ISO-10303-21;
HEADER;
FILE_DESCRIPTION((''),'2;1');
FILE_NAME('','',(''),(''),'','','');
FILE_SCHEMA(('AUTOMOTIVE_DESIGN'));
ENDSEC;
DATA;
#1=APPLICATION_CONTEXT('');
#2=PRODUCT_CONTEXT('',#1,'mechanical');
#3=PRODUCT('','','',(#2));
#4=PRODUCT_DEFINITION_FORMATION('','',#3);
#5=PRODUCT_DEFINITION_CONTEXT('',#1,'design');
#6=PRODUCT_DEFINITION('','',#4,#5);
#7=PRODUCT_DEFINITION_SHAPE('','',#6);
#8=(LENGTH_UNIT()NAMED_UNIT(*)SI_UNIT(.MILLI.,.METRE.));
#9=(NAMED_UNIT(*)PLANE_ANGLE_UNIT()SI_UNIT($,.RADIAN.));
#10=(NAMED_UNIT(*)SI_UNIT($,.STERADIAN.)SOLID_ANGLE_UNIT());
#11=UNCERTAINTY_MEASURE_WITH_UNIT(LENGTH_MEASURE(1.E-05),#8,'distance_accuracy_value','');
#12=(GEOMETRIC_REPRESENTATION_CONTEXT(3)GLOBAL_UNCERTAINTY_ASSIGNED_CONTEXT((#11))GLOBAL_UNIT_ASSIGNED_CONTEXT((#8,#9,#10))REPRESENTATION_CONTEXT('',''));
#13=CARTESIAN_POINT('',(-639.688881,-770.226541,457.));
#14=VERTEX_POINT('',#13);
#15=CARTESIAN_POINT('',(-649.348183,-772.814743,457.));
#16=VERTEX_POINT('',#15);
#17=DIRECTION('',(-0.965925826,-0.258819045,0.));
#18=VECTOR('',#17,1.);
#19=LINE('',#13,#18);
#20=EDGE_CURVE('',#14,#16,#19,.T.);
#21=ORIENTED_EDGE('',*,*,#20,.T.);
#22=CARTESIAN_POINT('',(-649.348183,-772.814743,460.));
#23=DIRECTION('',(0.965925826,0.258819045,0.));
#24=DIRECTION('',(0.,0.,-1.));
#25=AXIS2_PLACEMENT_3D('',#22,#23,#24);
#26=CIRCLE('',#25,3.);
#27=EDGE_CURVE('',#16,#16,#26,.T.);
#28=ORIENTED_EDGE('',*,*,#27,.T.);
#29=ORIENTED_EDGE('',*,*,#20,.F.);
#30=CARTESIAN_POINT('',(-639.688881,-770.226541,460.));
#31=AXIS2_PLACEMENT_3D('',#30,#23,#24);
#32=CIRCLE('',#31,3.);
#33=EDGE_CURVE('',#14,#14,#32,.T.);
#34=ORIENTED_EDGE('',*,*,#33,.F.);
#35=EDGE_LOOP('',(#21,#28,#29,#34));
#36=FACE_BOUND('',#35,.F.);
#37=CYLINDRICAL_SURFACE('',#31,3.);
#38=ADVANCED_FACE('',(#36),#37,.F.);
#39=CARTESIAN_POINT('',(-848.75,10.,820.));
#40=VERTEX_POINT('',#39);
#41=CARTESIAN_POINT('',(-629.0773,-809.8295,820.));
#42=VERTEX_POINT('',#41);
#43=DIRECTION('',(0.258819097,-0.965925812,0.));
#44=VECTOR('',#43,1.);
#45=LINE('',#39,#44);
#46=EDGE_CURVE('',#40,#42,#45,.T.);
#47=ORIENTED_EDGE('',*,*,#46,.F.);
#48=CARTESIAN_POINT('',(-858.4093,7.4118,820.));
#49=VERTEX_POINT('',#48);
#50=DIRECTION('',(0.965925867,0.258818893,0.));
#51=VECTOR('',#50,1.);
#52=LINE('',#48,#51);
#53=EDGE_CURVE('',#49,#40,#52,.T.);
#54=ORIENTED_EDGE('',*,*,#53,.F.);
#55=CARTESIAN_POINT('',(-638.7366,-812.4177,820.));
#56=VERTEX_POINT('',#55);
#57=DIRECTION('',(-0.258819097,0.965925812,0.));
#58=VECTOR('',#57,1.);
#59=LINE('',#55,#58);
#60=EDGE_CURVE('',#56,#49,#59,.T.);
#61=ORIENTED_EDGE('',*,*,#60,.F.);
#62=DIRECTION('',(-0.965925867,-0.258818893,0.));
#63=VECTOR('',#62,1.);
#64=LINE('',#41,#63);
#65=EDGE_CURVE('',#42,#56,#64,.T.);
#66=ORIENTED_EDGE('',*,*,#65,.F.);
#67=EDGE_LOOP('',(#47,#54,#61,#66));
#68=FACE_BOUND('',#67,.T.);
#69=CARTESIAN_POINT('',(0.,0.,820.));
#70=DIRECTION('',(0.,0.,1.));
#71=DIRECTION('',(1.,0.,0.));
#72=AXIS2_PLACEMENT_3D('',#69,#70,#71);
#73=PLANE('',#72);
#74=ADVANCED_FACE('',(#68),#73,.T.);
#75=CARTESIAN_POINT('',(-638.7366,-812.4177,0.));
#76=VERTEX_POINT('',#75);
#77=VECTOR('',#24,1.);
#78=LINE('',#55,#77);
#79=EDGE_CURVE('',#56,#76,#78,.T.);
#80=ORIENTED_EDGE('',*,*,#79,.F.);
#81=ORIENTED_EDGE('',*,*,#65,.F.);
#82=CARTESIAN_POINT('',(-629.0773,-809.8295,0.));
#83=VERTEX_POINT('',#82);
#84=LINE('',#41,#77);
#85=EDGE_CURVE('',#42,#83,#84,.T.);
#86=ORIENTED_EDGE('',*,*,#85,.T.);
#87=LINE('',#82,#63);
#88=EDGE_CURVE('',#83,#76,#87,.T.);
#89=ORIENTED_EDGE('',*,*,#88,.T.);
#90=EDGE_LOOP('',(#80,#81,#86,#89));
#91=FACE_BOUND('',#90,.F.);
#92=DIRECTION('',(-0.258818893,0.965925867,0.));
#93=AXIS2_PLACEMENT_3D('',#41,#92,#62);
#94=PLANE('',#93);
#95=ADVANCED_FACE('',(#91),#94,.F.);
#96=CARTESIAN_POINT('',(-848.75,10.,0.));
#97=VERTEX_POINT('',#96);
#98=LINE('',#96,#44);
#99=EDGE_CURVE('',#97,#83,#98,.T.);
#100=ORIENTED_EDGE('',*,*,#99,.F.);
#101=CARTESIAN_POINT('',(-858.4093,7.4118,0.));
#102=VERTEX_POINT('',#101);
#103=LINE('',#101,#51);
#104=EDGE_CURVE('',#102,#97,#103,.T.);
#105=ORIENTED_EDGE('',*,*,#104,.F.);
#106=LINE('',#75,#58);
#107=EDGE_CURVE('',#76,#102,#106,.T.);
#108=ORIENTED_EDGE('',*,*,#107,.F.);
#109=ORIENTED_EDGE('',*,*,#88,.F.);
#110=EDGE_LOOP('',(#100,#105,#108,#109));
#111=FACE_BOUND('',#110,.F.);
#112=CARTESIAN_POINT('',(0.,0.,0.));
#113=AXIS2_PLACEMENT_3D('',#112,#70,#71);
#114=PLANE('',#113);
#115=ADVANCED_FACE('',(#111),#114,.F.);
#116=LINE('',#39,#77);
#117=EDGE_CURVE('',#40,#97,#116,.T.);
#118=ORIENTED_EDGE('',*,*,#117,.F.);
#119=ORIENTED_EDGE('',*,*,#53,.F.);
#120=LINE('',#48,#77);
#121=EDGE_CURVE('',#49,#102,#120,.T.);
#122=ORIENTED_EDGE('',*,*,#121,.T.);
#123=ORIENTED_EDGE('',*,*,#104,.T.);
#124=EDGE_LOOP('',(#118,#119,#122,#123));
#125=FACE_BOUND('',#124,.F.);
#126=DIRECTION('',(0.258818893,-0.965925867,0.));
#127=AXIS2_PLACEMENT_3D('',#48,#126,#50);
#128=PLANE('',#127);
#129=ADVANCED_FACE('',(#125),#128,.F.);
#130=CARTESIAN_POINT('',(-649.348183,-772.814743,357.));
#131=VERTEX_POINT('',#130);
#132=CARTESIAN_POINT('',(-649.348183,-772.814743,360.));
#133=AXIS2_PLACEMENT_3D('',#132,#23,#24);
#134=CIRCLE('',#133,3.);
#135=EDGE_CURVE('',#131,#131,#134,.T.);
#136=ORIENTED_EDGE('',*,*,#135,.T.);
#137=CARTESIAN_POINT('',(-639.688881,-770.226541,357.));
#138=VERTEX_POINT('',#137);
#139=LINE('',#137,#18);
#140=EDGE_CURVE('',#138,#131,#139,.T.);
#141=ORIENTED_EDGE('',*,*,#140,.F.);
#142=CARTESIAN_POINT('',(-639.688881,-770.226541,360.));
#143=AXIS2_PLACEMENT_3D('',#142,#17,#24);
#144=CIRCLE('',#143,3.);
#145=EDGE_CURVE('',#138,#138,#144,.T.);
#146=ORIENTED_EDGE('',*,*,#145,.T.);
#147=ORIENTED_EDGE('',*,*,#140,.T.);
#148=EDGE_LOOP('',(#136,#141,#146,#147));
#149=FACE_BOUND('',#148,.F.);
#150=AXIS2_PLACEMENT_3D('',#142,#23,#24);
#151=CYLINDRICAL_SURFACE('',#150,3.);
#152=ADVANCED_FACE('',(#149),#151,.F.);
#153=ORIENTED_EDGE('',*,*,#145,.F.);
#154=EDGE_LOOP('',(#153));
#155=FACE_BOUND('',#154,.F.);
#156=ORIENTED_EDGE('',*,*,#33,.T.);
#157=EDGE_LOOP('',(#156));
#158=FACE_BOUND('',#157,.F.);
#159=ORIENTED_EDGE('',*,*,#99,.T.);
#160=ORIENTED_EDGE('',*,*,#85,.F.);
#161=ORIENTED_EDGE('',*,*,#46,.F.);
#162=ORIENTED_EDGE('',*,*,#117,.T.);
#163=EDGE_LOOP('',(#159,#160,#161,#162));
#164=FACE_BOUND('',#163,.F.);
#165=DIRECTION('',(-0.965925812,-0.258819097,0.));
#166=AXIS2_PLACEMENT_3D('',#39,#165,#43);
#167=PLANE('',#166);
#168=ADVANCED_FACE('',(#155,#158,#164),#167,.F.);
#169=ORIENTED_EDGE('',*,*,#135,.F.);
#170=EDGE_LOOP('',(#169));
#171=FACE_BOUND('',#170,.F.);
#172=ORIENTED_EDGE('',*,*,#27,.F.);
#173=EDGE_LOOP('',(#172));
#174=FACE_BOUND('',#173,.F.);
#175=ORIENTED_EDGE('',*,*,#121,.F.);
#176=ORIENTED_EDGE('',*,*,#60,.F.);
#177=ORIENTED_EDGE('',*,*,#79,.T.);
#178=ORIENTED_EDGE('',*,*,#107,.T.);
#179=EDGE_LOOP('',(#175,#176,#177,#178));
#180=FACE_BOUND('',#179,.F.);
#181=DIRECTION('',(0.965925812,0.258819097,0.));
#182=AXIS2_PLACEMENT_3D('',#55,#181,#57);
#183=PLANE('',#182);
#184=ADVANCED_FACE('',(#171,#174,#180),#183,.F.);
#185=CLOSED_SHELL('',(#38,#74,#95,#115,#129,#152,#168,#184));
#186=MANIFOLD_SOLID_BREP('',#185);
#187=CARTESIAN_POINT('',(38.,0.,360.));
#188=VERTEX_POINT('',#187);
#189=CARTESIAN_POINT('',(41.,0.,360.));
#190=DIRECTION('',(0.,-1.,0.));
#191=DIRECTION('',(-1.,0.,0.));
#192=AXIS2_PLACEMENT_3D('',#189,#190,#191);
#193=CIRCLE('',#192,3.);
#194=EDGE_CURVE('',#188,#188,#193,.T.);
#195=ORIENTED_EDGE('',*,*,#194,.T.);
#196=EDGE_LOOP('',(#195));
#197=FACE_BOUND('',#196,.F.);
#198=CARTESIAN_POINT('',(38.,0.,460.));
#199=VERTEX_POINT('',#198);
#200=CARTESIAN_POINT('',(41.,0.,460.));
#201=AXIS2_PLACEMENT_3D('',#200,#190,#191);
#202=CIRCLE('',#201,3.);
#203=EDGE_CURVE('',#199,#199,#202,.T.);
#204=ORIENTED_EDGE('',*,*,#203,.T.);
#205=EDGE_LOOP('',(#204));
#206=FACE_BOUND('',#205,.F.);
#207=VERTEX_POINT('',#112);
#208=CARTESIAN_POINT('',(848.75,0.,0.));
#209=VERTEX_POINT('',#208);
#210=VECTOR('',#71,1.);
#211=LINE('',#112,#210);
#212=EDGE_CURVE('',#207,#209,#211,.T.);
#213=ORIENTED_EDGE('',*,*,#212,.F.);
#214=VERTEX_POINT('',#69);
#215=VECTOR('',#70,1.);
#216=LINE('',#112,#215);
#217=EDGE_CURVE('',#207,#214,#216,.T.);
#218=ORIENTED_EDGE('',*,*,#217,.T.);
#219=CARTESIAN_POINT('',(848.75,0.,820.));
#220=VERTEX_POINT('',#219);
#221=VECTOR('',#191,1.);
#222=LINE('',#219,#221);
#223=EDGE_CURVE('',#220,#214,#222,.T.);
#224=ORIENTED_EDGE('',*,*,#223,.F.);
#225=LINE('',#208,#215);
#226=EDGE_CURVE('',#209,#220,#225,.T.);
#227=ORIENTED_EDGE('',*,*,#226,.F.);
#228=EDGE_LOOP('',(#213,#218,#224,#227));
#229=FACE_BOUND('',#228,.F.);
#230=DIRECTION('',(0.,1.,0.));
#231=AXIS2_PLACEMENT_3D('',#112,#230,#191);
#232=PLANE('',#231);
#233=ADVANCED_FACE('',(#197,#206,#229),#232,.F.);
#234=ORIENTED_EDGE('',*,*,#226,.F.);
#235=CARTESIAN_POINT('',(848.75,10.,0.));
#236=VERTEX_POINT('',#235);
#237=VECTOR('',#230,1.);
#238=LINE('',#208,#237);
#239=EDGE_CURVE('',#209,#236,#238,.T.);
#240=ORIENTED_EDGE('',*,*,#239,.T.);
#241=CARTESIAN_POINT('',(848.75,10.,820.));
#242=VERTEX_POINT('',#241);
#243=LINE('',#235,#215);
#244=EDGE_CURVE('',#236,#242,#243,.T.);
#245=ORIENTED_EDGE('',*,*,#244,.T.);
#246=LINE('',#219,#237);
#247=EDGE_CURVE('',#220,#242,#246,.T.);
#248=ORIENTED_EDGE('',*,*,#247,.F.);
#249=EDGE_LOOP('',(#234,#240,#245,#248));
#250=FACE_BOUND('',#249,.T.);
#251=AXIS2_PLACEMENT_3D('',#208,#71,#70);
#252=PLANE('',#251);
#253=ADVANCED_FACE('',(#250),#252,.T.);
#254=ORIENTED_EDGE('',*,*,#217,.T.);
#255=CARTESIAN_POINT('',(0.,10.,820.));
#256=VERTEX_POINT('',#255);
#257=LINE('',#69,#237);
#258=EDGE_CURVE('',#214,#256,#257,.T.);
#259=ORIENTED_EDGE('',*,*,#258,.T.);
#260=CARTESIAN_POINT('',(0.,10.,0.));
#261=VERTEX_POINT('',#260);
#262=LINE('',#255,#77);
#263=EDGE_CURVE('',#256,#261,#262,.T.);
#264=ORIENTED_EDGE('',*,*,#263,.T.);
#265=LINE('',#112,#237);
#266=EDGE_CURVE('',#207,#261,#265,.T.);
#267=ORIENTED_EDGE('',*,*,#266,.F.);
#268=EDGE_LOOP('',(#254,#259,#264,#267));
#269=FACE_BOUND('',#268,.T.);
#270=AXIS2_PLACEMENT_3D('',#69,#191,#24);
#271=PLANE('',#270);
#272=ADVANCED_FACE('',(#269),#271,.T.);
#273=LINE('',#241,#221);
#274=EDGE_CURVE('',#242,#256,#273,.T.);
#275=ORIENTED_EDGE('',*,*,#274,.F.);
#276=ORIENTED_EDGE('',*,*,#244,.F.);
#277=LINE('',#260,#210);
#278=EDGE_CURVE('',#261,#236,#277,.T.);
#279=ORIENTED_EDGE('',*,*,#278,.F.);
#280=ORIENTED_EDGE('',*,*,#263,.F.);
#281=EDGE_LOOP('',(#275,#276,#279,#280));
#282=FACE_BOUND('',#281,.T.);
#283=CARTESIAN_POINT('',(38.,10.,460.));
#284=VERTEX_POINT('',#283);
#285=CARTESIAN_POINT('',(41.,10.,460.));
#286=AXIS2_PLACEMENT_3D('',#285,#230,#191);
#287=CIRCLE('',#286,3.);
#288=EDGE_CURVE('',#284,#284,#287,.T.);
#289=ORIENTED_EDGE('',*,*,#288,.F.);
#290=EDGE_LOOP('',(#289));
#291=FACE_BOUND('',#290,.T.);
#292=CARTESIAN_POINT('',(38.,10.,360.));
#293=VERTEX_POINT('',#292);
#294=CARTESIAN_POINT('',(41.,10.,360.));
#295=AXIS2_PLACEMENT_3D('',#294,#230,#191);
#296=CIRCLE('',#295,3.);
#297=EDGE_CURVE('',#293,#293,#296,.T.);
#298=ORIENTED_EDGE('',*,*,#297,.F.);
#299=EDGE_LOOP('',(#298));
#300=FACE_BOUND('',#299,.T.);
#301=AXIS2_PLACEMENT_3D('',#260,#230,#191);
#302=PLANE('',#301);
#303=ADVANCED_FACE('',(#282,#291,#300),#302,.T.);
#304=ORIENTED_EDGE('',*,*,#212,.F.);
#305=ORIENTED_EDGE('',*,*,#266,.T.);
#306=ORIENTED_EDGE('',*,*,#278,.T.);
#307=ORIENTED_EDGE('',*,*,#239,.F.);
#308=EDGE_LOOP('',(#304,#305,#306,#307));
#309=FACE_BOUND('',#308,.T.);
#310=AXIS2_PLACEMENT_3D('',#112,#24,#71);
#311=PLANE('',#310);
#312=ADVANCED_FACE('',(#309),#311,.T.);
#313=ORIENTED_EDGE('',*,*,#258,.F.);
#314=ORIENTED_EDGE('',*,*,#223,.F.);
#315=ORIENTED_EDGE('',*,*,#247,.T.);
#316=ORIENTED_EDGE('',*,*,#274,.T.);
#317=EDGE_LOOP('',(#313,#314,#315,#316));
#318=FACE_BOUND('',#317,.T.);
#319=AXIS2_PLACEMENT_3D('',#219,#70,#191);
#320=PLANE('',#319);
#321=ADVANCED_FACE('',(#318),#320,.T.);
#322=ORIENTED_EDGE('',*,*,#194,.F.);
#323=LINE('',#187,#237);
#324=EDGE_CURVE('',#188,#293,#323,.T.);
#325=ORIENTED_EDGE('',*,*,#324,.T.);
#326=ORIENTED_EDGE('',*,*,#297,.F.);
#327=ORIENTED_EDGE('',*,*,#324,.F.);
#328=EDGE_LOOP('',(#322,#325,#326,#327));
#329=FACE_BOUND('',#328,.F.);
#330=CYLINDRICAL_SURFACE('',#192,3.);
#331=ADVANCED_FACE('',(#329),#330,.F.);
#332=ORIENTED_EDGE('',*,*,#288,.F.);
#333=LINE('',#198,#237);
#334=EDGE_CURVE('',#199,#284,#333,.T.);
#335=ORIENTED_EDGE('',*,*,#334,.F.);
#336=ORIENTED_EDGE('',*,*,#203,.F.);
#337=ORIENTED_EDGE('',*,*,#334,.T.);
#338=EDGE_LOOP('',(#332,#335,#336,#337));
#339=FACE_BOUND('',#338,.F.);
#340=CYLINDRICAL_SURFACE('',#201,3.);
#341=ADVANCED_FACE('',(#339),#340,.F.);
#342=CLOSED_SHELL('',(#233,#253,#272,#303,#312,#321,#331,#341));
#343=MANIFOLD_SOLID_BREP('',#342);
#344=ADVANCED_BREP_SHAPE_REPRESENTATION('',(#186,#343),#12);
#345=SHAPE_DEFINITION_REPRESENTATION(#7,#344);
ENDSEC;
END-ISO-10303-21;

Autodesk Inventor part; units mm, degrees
ref_plane "YZ Plane" through (0, 0, 0) normal (1, 0, 0) x (0, 1, 0)
ref_plane "XZ Plane" through (0, 0, 0) normal (0, 1, 0) x (-1, 0, 0)
ref_plane "XY Plane" through (0, 0, 0) normal (0, 0, 1) x (1, 0, 0)
sketch "Sketch1" plane through (0, 0, 0) normal (0, 1, 0) x (-1, 0, 0)
  line L0 (0, 0) -> (-848.75, 0)
  line L1 (-848.75, 0) -> (-848.75, 820)
  line L2 (-848.75, 820) -> (0, 820)
  line L3 (0, 820) -> (0, 0)
  line L4 (0, 410) -> (-41, 410)
  line L5 (-41, 410) -> (-41, 460)
  line L6 (-41, 460) -> (-41, 360)
  circle A0 centre (-41, 460) radius 3
  circle A1 centre (-41, 360) radius 3
  dimension "ancho_m" = 848.75
  dimension "h_inf" = 820
  dimension "d2" = 41
  dimension "d3" = 50
  dimension "d4" = 100
  dimension "d5" = 6
  dimension "d6" = 6
extrude "Extrusion1" add sketch "Sketch1" along normal blind 10
sketch "Boceto10" plane through (0, 0, 820) normal (0, 0, 1) x (1, 0, 0)
  line L0 (848.75, 10) -> (0, 10) projected
  line L1 (0, 10) -> (-848.75, 10)
  line L2 (-848.75, 10) -> (-629.0773, -809.8295)
  line L3 (-848.75, 10) -> (0, 10) construction
  line L4 (-629.0773, -809.8295) -> (-638.7366, -812.4177)
  line L5 (-638.7366, -812.4177) -> (-858.4093, 7.4118)
  line L6 (-858.4093, 7.4118) -> (-848.75, 10)
  point P0 (0, 0)
  dimension "d49" = 848.75
  dimension "d50" = 848.75
  dimension "angulo" = 75
  dimension "d52" = 10
  dimension "d53" = 848.75
extrude "Extrusión10" add sketch "Boceto10" against normal blind 820
sketch "Boceto11" plane through (-629.0773, -809.8295, 820) normal (0.9659258, 0.258819, 0) x (0, 0, -1)
  line L0 (0, 848.75) -> (0, 0) projected
  line L1 (0, 0) -> (820, 0) projected
  line L2 (820, 848.75) -> (820, 0) projected
  line L3 (0, 848.75) -> (820, 848.75) projected
  line L4 (0, 0) -> (820, 0) projected
  line L5 (410, 0) -> (410, 41)
  line L6 (410, 41) -> (360, 41)
  line L7 (360, 41) -> (460, 41)
  circle A0 centre (360, 41) radius 3
  circle A1 centre (460, 41) radius 3
  point P0 (820, 619.4181)
  dimension "d56" = 41
  dimension "d57" = 50
  dimension "d58" = 100
  dimension "d59" = 6
  dimension "d60" = 6
extrude "Extrusión11" cut sketch "Boceto11" against normal up to next contours A0 | A1
equation "\"d2\" = 0.05 * h_inf"
equation "\"d49\" = ancho_m"
equation "\"d50\" = ancho_m"
equation "\"d52\" = espesor"
equation "\"d53\" = ancho_m"
equation "\"d54\" = h_inf"
equation "\"d56\" = 0.05 * h_inf"
equation "\"d61\" = h_inf"
equation "\"espesor\" = 10"
properties part number "puerta_inf"
